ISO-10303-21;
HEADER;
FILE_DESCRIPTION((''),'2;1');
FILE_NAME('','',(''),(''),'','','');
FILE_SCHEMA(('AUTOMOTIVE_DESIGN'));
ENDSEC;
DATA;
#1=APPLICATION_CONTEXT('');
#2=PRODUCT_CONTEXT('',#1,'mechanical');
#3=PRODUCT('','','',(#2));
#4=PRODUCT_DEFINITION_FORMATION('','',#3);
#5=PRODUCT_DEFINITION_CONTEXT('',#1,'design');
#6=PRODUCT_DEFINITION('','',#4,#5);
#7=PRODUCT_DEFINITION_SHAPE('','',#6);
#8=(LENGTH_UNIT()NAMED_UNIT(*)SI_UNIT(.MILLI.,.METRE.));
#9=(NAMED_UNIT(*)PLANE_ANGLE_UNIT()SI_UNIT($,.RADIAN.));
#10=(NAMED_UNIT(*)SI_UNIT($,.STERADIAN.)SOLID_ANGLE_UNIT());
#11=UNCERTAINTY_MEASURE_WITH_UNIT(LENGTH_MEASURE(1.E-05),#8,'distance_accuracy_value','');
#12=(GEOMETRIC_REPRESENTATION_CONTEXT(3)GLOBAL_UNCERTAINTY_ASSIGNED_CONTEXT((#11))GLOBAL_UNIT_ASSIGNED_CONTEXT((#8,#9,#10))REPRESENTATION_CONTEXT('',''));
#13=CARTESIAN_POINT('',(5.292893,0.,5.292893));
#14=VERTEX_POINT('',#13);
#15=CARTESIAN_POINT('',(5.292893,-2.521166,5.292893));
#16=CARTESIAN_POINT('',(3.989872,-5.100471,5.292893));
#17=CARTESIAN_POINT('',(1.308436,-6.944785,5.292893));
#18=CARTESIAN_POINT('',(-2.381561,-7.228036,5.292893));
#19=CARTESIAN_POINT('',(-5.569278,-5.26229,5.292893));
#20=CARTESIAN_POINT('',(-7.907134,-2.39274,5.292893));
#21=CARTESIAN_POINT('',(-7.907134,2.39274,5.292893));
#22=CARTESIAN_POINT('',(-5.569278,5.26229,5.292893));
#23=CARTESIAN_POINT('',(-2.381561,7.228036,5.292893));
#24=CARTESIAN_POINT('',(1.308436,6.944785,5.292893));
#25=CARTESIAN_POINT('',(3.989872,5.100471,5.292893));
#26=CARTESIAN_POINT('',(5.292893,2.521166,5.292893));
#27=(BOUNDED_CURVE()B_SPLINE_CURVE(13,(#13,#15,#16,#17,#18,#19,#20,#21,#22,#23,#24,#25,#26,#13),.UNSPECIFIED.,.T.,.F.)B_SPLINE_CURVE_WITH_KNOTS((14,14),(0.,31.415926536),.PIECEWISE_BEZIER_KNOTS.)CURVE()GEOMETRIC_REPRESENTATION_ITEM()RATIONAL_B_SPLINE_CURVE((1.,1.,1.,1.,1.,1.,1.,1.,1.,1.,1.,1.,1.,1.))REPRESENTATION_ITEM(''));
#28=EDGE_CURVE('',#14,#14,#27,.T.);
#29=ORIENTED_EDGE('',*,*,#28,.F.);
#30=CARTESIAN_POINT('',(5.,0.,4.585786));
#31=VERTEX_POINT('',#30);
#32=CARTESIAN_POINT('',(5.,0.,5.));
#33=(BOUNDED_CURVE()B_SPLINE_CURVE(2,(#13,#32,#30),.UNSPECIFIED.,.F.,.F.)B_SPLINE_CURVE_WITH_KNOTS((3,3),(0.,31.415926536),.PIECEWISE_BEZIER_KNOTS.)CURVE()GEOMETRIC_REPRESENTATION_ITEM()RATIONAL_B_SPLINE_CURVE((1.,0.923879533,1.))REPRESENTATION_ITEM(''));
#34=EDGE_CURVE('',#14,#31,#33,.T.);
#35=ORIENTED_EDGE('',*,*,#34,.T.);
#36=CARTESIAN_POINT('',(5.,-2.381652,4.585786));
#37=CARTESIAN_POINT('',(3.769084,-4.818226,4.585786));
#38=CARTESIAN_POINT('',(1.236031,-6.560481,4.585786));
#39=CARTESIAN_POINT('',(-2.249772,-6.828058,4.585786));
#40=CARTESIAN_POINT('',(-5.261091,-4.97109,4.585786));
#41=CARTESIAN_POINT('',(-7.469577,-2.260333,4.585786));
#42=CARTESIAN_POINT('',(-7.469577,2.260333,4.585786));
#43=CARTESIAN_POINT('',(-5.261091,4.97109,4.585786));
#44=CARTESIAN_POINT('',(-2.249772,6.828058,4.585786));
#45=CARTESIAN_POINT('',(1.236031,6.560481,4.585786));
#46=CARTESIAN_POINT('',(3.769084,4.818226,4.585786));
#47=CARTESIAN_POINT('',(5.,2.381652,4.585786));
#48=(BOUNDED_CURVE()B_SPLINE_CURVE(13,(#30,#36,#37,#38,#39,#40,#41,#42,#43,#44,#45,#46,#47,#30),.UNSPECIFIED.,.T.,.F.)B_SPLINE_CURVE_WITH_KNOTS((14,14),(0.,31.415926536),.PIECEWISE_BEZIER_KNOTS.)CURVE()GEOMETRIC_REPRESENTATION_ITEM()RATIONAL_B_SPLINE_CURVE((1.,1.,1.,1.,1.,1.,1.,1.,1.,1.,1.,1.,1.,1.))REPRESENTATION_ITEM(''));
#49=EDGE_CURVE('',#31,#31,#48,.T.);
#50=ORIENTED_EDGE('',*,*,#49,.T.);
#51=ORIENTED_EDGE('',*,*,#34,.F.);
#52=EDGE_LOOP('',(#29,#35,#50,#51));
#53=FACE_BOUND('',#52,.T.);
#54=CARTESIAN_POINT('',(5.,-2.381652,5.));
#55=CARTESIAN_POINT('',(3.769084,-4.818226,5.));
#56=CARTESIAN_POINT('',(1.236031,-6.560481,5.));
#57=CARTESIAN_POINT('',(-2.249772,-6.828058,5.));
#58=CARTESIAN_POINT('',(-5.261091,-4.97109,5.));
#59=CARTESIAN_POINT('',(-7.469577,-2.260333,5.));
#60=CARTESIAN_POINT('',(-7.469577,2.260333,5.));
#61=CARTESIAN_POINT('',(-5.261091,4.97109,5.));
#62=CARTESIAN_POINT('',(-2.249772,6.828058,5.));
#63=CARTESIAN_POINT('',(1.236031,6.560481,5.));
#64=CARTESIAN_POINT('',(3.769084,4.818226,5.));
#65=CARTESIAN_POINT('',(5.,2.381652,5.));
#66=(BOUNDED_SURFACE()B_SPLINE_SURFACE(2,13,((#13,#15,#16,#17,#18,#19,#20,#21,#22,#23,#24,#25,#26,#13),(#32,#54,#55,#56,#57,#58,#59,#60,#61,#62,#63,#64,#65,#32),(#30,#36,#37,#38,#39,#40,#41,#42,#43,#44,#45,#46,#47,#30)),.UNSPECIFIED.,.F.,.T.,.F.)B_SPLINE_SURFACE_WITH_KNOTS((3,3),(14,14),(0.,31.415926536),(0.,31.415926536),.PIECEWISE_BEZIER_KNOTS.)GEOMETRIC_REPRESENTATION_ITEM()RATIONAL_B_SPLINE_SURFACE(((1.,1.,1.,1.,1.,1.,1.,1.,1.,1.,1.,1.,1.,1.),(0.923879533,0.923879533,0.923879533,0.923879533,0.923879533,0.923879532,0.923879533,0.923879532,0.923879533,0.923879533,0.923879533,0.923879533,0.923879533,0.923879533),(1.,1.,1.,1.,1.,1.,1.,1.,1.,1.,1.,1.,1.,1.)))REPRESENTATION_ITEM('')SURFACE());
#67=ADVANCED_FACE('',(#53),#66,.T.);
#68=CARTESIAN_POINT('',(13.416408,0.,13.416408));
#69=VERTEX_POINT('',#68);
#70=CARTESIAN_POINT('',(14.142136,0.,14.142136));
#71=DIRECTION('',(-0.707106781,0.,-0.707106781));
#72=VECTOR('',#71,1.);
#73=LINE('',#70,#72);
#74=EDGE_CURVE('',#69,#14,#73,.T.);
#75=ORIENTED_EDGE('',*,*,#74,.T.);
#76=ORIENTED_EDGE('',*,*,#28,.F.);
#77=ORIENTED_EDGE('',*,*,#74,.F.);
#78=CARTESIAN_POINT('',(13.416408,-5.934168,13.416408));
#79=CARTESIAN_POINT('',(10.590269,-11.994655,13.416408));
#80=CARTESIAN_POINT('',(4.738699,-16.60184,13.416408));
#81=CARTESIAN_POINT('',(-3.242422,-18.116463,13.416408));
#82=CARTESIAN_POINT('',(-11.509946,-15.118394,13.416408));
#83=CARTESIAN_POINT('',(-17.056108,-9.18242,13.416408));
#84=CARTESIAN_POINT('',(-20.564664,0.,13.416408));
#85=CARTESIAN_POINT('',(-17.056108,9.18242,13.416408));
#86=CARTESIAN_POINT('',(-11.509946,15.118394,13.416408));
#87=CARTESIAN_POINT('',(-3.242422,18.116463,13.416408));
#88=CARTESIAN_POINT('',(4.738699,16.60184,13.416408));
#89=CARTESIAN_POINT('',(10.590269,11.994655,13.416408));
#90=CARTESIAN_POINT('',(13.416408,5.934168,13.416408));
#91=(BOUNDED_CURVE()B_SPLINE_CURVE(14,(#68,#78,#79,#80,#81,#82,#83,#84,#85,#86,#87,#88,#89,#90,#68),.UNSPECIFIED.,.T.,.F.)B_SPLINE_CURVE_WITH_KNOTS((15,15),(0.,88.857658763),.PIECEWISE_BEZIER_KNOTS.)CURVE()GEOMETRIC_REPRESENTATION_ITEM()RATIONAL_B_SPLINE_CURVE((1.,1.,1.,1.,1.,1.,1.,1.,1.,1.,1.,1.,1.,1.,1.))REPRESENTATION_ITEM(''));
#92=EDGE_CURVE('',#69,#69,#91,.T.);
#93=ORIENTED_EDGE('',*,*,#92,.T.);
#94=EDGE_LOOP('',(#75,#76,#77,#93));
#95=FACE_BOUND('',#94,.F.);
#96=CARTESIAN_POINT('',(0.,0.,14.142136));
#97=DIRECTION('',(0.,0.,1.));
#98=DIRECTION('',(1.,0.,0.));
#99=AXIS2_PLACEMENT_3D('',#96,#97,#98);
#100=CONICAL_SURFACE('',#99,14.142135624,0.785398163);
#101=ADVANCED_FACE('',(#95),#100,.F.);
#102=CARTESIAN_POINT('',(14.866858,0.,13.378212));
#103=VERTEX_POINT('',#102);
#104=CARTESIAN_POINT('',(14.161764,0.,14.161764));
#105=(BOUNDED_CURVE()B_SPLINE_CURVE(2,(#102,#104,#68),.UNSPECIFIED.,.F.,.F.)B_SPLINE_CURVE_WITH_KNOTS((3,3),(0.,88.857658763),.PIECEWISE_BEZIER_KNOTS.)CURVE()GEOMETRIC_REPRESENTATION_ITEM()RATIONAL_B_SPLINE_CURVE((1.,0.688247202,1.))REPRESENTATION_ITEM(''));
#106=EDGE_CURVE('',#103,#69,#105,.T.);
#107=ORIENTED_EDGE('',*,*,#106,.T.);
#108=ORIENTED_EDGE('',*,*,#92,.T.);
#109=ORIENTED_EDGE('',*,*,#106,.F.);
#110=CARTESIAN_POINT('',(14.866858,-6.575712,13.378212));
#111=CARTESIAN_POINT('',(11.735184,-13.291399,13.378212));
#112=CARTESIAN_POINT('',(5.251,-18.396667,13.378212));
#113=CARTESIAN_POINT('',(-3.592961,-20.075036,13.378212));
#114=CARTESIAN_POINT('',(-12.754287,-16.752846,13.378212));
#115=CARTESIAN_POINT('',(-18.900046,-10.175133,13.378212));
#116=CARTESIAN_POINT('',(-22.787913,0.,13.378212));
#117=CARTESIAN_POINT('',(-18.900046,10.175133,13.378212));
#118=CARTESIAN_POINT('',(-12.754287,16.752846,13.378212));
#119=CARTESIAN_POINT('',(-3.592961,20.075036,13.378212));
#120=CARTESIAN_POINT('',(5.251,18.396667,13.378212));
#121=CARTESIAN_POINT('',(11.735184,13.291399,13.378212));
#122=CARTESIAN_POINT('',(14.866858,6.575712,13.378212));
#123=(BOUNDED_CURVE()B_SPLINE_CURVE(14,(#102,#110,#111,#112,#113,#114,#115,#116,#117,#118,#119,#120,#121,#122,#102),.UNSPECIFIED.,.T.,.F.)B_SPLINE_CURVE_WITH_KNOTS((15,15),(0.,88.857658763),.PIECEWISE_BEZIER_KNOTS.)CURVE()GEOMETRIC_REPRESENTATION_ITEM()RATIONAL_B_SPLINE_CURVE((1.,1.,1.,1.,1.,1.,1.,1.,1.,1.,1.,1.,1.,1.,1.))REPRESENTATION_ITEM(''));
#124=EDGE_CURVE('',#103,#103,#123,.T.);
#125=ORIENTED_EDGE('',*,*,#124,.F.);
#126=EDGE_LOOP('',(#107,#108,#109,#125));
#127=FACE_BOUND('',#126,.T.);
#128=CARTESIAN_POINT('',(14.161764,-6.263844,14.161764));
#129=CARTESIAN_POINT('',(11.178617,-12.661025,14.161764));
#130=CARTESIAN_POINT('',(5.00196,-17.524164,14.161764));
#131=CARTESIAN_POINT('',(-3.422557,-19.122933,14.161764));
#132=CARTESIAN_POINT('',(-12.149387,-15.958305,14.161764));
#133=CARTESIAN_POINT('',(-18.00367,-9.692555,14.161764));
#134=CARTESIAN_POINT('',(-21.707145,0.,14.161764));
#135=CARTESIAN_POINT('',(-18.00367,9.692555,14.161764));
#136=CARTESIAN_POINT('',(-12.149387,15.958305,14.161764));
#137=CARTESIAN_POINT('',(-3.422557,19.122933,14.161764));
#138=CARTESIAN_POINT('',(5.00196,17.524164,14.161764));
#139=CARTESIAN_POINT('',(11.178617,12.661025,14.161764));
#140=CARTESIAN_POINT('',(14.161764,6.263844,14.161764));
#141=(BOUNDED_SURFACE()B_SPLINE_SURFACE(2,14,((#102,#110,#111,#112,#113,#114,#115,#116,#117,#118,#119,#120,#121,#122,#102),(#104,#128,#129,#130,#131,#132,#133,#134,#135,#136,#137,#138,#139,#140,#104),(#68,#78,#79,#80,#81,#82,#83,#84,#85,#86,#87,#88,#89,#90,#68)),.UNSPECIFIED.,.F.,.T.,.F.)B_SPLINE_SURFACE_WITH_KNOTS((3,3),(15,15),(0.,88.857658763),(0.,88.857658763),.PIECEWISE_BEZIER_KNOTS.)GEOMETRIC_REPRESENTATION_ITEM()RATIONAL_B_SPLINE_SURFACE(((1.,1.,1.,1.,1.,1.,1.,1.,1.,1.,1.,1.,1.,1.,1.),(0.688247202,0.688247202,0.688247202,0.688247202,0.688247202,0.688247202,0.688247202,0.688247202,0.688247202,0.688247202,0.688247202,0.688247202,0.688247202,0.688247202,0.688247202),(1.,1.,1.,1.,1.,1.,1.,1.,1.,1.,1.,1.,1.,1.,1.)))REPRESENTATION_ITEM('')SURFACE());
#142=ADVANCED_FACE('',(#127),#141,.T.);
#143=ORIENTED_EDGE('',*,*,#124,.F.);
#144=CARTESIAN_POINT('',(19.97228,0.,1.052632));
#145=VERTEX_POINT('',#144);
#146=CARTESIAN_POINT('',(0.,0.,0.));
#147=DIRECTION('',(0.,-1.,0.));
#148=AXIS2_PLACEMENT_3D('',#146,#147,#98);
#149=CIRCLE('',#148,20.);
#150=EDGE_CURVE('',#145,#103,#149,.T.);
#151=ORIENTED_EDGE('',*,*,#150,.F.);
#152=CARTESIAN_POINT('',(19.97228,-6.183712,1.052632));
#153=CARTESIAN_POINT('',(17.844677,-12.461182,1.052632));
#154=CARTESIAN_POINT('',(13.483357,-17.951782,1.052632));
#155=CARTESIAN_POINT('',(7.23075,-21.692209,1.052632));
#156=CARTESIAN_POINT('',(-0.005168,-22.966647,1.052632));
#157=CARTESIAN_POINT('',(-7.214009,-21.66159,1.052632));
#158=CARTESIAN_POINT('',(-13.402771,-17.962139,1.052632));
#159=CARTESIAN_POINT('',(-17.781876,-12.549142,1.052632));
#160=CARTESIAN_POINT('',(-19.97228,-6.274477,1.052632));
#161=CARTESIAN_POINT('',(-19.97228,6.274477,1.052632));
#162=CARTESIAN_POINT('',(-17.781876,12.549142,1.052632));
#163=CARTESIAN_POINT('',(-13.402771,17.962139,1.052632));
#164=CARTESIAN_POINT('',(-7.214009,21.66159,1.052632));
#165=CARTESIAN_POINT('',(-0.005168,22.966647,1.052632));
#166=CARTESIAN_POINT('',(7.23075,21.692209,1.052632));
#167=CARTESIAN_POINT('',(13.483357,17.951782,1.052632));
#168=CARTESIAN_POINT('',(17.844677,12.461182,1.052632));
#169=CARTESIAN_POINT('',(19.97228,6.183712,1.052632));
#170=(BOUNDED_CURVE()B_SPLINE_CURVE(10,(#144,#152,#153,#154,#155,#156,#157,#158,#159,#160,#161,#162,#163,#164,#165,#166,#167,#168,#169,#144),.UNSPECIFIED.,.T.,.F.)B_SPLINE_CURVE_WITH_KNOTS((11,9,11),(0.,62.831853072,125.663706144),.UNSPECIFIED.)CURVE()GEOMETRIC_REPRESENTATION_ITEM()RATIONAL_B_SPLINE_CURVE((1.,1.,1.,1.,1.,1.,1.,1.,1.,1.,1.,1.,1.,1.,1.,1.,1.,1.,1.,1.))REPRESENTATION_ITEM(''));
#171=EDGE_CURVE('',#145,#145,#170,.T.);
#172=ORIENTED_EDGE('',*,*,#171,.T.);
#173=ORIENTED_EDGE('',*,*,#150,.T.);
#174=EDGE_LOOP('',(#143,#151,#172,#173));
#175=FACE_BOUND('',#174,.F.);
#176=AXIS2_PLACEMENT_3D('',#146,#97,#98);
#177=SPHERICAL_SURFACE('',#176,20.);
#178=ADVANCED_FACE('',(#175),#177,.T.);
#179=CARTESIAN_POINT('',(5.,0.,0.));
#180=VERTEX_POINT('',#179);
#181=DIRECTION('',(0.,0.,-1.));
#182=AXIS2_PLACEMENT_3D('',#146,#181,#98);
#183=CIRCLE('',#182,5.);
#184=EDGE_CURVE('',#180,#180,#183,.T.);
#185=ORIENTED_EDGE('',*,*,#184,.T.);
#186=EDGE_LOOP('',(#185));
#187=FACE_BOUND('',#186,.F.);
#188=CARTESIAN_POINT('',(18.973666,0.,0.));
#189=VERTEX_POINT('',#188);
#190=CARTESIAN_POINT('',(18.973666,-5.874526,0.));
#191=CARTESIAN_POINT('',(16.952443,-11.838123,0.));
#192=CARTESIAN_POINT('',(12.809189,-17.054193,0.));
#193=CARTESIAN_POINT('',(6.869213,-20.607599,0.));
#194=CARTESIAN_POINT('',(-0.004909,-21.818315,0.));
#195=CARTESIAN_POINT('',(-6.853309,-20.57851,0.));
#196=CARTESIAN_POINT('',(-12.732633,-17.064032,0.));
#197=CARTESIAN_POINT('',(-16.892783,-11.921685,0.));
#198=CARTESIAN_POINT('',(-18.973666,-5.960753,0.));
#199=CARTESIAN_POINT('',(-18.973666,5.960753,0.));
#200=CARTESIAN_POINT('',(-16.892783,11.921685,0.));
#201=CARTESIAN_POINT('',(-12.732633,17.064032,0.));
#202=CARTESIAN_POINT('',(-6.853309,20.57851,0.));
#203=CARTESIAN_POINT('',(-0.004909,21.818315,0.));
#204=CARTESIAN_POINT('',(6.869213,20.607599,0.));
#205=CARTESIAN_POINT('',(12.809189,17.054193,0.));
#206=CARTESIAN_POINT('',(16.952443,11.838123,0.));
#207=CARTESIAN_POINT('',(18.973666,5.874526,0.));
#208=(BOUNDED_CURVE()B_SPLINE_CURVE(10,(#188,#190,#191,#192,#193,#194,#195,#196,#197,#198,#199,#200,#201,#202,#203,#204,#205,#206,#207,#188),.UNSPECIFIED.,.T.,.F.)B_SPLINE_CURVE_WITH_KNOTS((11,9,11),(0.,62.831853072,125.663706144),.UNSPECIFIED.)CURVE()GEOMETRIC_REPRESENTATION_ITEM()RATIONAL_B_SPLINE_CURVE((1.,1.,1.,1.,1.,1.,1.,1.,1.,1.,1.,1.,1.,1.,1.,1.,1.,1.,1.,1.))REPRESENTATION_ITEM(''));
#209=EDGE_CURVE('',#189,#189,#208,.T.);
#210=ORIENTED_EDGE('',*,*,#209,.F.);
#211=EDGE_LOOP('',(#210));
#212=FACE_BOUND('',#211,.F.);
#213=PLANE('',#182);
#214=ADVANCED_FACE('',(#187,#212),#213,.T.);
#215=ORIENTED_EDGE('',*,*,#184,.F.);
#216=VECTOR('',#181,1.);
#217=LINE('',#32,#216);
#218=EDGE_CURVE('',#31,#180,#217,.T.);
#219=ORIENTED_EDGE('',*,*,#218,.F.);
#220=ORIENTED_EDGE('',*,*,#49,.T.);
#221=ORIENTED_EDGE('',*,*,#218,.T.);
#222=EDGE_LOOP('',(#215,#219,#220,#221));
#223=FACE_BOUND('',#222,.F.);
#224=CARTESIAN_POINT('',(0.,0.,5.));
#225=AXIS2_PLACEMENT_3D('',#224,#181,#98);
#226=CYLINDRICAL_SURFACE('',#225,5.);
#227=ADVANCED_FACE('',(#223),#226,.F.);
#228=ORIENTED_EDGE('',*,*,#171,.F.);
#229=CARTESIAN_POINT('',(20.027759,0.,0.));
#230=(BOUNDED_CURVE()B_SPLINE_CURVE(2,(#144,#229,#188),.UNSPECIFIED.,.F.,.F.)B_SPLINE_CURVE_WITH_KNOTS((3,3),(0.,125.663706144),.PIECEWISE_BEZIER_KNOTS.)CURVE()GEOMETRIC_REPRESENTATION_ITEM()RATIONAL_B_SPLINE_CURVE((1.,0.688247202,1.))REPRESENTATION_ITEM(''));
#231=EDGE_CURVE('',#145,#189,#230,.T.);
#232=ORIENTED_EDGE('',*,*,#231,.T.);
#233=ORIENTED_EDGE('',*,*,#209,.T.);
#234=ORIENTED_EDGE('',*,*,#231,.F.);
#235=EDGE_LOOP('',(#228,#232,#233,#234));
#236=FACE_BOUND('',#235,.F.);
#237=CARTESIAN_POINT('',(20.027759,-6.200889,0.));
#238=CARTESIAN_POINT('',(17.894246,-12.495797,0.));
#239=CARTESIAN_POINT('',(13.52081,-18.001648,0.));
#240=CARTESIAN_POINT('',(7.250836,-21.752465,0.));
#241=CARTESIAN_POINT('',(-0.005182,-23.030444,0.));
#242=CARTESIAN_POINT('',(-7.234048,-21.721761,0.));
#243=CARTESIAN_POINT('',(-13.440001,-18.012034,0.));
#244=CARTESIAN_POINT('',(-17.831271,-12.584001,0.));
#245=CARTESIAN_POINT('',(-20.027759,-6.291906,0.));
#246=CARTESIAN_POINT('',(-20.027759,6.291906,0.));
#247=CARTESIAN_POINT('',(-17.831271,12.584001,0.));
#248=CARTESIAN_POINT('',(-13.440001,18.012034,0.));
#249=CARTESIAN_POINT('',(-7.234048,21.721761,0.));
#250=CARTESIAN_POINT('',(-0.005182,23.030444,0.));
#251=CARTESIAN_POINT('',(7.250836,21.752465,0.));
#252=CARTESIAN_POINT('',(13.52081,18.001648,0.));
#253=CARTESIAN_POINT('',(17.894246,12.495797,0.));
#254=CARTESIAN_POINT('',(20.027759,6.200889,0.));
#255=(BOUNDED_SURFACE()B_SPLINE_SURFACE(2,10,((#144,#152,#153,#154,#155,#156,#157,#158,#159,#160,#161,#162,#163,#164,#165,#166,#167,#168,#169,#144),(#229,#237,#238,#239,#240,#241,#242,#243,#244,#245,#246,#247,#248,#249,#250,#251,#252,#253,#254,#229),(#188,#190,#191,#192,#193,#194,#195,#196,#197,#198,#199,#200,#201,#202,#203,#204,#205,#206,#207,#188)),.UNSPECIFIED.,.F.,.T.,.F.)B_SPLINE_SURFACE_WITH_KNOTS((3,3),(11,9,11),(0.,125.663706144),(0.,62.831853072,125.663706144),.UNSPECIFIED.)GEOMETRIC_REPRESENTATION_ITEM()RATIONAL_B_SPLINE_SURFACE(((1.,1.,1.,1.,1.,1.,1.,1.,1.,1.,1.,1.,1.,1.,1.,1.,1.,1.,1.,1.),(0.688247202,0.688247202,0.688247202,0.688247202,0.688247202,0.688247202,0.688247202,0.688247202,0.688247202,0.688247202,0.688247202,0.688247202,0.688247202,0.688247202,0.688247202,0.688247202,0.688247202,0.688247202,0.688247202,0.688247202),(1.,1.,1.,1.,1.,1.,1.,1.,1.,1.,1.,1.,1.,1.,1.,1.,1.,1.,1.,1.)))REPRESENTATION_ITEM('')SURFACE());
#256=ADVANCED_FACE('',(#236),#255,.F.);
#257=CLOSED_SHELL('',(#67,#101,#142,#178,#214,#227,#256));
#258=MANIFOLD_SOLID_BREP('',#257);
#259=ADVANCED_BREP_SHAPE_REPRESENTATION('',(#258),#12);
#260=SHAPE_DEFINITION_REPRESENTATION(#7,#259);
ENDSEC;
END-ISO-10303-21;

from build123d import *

# Parameters (mm, degrees)
F2_R = 1


with BuildPart() as f1:
    # F0 (on Front) → F1 (revolve)
    with BuildSketch(Plane.XZ):
        with BuildLine():
            ThreePointArc((20, 0), (18.4775906502, 7.6536686473), (14.1421356237, 14.1421356237))
            Line((14.1421356237, 14.1421356237), (5, 5))
            Line((5, 5), (5, 0))
            Line((5, 0), (20, 0))
        make_face()
    revolve(axis=Axis((0, 0, 1.4953076416), (0, 0, -1)))

    # F2
    f2_edges = [f1.edges().sort_by_distance(p)[0] for p in [
        (-5, 0, 5),
        (-14.142136, 0, 14.142136),
        (-20, 0, 0),
    ]]
    fillet(f2_edges, radius=F2_R)


solid = f1.part
